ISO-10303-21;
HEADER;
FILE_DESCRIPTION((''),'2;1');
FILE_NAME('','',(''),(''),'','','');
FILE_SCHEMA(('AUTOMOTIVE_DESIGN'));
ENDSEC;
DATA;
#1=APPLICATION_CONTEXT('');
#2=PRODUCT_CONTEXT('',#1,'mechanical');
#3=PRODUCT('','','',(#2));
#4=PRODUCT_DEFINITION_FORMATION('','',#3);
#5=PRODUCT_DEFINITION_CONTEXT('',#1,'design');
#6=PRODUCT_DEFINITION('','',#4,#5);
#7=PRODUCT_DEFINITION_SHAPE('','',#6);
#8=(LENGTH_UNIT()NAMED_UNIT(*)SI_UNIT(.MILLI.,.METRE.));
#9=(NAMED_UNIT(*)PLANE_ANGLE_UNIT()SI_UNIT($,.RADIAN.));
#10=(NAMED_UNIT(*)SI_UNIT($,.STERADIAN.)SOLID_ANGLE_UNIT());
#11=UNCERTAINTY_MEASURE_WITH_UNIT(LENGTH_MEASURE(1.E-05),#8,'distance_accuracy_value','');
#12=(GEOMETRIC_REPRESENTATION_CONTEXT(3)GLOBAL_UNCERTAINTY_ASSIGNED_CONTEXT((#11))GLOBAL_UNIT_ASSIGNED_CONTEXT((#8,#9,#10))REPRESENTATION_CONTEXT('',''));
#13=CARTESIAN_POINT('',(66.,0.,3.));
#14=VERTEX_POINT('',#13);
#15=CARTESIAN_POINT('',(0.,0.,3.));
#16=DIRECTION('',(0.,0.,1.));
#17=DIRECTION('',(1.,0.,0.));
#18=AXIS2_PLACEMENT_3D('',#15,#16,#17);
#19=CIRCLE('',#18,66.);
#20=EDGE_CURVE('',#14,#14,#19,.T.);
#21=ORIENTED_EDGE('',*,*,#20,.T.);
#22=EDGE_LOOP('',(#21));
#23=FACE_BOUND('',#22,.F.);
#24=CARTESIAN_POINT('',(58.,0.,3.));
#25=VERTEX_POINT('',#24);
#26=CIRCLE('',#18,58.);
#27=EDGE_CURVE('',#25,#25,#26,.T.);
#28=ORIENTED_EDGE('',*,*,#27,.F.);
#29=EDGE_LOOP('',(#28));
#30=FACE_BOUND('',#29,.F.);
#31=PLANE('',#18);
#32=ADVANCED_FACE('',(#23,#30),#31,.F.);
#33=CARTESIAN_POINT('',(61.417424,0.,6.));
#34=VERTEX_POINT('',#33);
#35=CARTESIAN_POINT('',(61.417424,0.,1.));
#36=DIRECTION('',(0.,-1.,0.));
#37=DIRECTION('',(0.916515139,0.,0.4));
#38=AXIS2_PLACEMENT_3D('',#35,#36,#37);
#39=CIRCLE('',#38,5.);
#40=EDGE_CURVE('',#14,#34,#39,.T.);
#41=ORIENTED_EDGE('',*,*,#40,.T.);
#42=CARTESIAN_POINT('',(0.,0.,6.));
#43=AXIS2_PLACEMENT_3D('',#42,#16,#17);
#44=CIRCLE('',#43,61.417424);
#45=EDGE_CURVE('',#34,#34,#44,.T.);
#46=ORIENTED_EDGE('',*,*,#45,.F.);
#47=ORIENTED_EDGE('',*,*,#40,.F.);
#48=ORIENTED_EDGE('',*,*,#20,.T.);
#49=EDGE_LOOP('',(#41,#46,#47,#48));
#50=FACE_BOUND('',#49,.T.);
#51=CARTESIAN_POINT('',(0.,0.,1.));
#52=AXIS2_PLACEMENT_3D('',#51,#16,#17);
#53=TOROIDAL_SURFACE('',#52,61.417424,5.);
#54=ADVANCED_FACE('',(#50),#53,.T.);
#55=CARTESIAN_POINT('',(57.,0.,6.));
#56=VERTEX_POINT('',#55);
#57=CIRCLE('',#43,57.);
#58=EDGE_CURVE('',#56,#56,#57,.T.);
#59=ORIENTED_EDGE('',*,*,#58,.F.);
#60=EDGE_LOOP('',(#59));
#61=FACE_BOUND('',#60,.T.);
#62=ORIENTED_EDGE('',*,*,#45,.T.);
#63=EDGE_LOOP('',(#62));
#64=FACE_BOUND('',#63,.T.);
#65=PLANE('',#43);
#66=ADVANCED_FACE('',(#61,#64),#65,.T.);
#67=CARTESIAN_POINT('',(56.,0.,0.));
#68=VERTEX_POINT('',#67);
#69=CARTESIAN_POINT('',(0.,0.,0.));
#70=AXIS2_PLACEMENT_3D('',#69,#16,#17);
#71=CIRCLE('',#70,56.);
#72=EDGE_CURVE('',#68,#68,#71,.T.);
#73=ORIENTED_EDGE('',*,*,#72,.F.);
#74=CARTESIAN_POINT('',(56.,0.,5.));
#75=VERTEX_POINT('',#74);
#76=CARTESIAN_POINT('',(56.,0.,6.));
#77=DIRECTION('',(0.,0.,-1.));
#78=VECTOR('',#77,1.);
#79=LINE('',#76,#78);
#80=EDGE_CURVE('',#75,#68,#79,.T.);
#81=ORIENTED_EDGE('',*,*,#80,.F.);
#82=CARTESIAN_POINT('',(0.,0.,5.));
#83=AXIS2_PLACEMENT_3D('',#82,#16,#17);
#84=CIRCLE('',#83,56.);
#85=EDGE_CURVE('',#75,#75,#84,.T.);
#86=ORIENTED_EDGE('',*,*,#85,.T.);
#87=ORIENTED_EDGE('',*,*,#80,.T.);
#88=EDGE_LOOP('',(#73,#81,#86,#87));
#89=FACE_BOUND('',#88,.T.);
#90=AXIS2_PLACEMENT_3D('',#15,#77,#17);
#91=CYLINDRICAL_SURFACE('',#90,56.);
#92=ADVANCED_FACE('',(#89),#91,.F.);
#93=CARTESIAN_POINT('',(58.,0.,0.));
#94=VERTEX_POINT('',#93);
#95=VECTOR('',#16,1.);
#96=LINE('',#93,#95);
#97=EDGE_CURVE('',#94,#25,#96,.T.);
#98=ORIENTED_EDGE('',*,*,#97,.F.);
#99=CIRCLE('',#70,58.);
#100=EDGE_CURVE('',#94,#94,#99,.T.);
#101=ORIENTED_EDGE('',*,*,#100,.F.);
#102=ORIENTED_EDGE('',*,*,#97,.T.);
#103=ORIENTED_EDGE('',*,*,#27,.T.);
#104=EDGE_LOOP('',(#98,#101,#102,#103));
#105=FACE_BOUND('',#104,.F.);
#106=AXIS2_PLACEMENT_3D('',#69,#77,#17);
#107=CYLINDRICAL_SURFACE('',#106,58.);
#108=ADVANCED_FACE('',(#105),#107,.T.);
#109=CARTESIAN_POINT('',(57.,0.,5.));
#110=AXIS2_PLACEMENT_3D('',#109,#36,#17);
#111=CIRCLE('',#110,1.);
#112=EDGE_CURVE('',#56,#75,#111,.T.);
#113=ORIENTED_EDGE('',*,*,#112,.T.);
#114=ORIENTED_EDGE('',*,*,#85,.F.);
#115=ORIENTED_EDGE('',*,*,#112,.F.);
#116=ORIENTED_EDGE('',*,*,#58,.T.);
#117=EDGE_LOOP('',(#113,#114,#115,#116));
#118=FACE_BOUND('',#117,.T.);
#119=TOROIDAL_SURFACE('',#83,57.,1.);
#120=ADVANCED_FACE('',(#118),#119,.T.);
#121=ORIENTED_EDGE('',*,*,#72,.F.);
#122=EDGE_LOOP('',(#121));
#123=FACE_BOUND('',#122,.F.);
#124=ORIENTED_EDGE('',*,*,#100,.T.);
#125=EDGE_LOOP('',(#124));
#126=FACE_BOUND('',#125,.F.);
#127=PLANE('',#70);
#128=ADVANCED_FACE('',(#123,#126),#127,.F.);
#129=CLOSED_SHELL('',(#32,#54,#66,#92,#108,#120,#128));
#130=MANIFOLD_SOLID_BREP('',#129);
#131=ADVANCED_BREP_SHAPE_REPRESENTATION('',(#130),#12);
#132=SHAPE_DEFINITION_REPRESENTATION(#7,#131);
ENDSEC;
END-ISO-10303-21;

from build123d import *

# Parameters (mm, degrees)
F0_R     = 58
F0_R_2   = 56
F1_DEPTH = 3
F2_R     = 66
F2_R_2   = 58
F2_R_3   = 56
F3_DEPTH = 3
F5_R     = 1


# Not quite as in the source:
# - a fillet or chamfer that OpenCascade refuses, or shapes differently, is made with other operations: its cross-section is extruded or revolved along the edge and cut away or added


with BuildPart() as f1:
    # F0 (on Top) → F1 (new body)
    with BuildSketch(Plane.XY):
        Circle(F0_R)
        Circle(F0_R_2, mode=Mode.SUBTRACT)
    extrude(amount=F1_DEPTH)

    # F2 (on face) → F3 (join)
    with BuildSketch(Plane.XY.offset(3)):
        Circle(F2_R)
        Circle(F2_R_2, mode=Mode.SUBTRACT)
        Circle(F2_R_2)
        Circle(F2_R_3, mode=Mode.SUBTRACT)
    extrude(amount=F3_DEPTH)

    # F4: fillet of radius 5 on 1 edges, made by hand

    # F4_s1 → F4_t2 (revolve, cut)
    with BuildSketch(Plane.XZ):
        with BuildLine():
            ThreePointArc((66, 3), (64.1560370926, 5.1833001327), (61.417424305, 6))
            Line((61.417424305, 6), (66, 6))
            Line((66, 6), (66, 3))
        make_face()
    revolve(axis=Axis((0, 0, 6), (0, 0, 1)), mode=Mode.SUBTRACT)

    # F5
    f5_edges = [f1.edges().sort_by_distance(p)[0] for p in [
        (-56, 0, 6),
    ]]
    fillet(f5_edges, radius=F5_R)


solid = f1.part
